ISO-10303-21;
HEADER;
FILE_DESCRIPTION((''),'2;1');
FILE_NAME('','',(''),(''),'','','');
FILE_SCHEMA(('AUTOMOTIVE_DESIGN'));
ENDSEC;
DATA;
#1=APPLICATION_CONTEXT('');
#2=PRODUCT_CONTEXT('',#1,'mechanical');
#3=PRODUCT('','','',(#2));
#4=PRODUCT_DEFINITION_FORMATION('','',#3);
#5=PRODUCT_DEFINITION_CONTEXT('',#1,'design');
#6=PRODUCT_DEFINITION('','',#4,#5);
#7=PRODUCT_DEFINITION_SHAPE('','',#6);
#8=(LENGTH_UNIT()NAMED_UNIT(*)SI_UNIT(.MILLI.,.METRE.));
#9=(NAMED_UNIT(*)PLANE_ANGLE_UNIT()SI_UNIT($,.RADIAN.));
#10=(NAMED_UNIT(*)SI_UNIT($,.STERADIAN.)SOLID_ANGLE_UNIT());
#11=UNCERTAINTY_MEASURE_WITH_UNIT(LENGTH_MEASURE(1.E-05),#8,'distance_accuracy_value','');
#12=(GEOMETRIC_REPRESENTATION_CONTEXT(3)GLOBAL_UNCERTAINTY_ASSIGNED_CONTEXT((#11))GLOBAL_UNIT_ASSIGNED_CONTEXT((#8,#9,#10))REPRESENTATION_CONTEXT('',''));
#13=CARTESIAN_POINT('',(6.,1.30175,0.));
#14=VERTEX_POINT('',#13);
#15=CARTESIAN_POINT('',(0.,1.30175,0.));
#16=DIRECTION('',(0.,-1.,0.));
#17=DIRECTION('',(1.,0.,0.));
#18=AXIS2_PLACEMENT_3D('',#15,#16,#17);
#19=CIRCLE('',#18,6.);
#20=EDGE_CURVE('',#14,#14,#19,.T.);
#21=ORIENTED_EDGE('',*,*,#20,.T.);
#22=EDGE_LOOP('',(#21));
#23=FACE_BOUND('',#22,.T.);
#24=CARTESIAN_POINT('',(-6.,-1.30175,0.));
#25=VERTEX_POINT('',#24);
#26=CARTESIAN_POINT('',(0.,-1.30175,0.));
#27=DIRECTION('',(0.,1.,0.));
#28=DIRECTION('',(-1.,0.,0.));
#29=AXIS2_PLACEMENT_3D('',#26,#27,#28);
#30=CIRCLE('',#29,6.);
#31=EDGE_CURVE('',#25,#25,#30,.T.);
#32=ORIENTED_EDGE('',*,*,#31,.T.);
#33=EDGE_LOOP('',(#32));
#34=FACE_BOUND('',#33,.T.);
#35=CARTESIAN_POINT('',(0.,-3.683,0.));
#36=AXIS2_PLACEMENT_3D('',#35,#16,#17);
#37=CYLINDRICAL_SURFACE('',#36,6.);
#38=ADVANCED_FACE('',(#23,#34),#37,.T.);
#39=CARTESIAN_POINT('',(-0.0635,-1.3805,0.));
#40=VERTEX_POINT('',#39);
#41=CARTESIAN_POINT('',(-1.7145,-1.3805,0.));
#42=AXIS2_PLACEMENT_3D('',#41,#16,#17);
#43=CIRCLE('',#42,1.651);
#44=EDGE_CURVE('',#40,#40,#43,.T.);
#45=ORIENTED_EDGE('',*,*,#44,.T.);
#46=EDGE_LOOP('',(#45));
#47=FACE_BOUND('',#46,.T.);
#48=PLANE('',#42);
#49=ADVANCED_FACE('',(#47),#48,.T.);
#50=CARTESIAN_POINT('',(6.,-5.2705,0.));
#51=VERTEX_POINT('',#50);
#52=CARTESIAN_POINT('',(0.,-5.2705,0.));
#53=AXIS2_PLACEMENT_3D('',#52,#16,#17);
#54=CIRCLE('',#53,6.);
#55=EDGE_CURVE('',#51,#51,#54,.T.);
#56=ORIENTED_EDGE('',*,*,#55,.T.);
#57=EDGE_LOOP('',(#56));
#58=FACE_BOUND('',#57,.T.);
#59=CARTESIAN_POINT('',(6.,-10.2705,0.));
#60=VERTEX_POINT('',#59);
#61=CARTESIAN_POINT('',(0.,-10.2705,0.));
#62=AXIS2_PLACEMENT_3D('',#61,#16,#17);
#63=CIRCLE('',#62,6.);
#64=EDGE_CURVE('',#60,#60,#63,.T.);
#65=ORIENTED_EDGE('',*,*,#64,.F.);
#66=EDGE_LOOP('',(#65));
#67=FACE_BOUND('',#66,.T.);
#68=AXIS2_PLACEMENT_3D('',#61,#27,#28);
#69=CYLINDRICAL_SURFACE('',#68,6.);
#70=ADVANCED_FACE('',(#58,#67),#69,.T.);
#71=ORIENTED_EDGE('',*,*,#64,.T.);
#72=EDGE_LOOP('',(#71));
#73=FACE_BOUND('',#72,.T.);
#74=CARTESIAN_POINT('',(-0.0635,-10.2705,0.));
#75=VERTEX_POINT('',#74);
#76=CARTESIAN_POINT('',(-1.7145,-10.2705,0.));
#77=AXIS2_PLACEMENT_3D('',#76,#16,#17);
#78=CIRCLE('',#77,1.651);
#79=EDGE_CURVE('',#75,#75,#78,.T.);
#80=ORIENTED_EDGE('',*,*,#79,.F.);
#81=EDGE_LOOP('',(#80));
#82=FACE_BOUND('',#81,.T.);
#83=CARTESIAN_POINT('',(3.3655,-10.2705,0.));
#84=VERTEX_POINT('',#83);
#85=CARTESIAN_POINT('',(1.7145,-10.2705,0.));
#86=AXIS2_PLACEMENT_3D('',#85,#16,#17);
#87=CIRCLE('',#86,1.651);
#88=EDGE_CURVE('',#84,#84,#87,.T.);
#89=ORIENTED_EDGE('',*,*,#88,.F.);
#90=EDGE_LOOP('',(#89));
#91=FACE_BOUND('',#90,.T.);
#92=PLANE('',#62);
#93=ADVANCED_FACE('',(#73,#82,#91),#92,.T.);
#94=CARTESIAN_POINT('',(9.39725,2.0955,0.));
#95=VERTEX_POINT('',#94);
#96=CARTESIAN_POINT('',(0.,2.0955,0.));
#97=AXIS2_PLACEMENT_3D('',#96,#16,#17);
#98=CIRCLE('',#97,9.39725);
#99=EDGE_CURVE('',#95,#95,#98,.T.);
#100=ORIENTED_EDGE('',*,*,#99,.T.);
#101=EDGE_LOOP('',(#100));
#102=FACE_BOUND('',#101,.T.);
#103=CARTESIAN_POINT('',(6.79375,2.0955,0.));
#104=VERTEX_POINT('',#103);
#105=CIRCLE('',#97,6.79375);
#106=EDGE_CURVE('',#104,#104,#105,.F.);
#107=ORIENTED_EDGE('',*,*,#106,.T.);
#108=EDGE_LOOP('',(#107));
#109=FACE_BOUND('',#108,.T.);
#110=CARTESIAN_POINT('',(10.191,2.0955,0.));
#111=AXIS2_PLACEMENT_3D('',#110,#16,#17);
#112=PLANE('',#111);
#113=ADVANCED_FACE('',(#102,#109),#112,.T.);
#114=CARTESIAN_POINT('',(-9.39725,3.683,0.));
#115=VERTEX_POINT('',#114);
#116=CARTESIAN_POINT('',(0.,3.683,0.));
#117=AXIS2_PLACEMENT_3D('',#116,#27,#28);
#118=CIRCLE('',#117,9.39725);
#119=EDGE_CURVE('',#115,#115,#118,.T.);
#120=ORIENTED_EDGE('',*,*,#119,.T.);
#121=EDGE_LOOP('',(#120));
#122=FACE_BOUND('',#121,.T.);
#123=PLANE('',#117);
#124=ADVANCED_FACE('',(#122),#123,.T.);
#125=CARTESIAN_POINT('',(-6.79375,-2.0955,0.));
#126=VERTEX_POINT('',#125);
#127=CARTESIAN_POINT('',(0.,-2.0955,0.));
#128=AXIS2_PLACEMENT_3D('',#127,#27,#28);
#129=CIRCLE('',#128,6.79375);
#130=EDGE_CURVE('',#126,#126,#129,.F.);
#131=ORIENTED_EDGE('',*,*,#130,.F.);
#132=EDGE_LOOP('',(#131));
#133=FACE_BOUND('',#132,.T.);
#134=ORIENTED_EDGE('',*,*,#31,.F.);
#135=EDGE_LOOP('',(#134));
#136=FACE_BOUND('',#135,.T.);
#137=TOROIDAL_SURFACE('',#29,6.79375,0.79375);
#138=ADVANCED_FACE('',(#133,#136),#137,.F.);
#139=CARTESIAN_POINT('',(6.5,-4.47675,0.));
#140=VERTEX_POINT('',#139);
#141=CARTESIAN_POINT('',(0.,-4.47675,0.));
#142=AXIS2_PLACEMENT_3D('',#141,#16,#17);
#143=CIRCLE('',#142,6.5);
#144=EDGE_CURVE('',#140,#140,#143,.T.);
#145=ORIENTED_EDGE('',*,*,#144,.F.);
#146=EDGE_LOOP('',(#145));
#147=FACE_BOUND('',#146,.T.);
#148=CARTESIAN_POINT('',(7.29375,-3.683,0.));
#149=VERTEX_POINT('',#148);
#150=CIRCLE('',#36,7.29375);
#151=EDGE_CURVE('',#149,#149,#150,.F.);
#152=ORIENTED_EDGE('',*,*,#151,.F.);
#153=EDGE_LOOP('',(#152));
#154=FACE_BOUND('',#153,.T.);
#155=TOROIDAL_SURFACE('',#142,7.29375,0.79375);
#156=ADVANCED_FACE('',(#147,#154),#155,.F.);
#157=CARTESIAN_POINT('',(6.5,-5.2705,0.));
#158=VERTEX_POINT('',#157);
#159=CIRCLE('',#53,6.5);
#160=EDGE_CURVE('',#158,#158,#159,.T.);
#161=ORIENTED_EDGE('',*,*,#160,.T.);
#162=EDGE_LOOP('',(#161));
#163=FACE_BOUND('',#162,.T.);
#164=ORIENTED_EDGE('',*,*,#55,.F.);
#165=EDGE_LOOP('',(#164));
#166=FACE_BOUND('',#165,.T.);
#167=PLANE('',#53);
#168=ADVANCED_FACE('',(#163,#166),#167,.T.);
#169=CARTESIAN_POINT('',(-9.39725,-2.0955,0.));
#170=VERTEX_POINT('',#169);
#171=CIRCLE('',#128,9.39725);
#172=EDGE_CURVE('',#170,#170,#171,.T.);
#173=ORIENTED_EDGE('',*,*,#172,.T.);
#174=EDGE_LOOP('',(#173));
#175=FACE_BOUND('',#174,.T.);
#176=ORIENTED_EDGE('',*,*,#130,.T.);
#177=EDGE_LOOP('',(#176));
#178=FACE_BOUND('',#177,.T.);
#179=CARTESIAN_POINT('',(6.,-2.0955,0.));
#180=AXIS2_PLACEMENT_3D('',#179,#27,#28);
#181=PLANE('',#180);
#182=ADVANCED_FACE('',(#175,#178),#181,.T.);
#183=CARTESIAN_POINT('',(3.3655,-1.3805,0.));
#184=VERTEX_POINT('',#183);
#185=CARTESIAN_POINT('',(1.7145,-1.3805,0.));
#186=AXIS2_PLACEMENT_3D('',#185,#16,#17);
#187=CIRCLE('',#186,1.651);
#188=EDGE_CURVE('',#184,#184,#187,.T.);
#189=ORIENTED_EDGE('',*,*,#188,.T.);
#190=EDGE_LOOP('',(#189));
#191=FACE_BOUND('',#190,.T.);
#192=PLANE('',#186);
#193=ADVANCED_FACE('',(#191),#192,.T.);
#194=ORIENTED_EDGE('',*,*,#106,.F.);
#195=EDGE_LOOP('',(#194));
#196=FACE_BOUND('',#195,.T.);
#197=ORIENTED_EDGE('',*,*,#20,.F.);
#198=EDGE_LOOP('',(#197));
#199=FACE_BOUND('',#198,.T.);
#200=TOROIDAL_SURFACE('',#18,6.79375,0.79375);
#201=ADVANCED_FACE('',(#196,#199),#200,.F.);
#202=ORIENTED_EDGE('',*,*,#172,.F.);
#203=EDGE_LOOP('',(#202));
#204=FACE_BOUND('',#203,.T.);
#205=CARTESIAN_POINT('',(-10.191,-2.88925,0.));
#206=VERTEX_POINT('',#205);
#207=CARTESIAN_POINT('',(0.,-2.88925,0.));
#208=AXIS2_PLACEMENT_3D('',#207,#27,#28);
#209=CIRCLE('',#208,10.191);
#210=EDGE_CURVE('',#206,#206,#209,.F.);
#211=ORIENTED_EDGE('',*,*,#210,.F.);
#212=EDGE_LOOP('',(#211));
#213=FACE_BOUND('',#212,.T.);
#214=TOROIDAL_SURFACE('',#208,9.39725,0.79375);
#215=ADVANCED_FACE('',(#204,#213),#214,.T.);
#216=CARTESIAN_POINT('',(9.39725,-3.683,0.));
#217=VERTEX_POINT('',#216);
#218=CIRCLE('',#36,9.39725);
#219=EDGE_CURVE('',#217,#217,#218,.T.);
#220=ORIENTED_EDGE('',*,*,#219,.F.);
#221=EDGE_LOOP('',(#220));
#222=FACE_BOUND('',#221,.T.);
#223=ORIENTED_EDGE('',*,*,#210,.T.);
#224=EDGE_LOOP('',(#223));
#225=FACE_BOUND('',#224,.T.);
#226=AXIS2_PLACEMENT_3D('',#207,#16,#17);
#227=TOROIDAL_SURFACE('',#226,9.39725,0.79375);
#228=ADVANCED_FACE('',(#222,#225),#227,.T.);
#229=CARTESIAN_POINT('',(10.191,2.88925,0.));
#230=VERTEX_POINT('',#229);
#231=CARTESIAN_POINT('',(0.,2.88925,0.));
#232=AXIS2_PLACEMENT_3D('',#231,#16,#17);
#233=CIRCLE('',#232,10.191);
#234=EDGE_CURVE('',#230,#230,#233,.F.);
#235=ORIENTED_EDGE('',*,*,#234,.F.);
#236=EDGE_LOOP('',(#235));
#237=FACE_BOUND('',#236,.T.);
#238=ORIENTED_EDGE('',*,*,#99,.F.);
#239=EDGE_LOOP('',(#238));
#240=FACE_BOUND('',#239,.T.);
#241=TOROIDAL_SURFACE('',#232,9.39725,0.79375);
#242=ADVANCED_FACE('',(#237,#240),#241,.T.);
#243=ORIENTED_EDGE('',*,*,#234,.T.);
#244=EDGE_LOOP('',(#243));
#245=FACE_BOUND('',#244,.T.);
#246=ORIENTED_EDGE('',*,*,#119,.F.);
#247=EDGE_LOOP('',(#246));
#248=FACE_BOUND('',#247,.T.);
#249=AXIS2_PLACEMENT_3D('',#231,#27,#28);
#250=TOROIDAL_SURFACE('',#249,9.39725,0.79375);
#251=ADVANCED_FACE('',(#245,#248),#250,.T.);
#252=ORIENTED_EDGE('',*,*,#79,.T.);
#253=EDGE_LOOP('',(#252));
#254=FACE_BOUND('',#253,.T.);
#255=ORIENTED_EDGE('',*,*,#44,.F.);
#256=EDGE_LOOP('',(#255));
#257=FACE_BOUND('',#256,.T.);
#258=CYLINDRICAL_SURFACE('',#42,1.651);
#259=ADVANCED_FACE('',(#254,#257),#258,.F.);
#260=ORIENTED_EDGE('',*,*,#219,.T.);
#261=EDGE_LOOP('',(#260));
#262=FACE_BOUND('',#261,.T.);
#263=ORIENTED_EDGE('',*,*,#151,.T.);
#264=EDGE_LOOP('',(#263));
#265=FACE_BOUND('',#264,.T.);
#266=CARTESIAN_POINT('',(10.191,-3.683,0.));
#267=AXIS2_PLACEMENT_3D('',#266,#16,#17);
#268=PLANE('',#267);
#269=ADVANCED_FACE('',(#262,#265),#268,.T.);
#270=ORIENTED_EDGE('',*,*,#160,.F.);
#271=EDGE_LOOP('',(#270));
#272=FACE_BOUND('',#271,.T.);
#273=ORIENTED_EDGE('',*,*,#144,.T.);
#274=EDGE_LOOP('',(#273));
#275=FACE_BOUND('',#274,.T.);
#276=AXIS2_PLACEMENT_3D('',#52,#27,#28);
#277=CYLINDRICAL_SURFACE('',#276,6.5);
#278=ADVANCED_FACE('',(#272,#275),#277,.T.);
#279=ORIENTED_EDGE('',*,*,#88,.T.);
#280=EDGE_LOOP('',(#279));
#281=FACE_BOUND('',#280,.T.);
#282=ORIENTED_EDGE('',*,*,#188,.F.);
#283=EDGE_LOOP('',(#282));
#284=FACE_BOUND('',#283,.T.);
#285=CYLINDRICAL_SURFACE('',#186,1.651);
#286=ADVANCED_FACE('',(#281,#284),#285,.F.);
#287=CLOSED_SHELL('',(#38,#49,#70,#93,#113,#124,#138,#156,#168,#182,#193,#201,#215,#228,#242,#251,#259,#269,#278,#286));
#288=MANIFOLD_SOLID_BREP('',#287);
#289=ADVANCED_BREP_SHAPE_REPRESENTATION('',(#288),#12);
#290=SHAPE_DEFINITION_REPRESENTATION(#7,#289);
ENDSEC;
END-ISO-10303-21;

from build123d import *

# Parameters (mm, degrees)
SKETCH7_R           = 6.5
BOSS_EXTRUDE2_DEPTH = 1.5875
FILLET1_R           = 0.79375
BOSS_EXTRUDE1_START = 5
SKETCH6_R           = 6
BOSS_EXTRUDE1_DEPTH = 5
SKETCH5_R           = 1.651
CUT_EXTRUDE3_DEPTH  = 8.89


with BuildPart() as part:
    # Sketch2 → Revolve1 (revolve)
    with BuildSketch(Plane.XY):
        Polygon((0, 3.683), (10.191, 3.683), (10.191, 2.0955), (6, 2.0955), (6, -2.0955), (10.191, -2.0955), (10.191, -3.683), (0, -3.683), align=None)
    revolve(axis=Axis((0, -3.683, 0), (0, 1, 0)))

    # Sketch7 → Boss-Extrude2 (add)
    with BuildSketch(Plane(origin=(0, -3.683, 0), x_dir=(-1, 0, 0), z_dir=(0, -1, 0))):
        with Locations(Location((0, 0, 0), (0, 0, 180))):
            Circle(SKETCH7_R)
    extrude(amount=BOSS_EXTRUDE2_DEPTH)

    # Fillet1
    fillet1_edges = [part.edges().sort_by_distance(p)[0] for p in [
        (-10.191, 2.0955, 0),
        (-6.5, -3.683, 0),
        (-10.191, 3.683, 0),
        (-10.191, -3.683, 0),
        (-10.191, -2.0955, 0),
        (-6, -2.0955, 0),
        (-6, 2.0955, 0),
    ]]
    fillet(fillet1_edges, radius=FILLET1_R - 0.0001)  # a hair under: the kernel refuses the full size

    # Sketch6 → Boss-Extrude1 (add)
    with BuildSketch(Plane.XZ.offset(5.2705).offset(BOSS_EXTRUDE1_START)):
        Circle(SKETCH6_R)
    extrude(amount=-BOSS_EXTRUDE1_DEPTH)

    # Sketch5 → Cut-Extrude3 (cut)
    with BuildSketch(Plane.XZ.offset(10.2705)):
        with Locations((-1.7145, 0)):
            Circle(SKETCH5_R)
        with Locations((1.7145, 0)):
            Circle(SKETCH5_R)
    extrude(amount=-CUT_EXTRUDE3_DEPTH, mode=Mode.SUBTRACT)


solid = part.part
